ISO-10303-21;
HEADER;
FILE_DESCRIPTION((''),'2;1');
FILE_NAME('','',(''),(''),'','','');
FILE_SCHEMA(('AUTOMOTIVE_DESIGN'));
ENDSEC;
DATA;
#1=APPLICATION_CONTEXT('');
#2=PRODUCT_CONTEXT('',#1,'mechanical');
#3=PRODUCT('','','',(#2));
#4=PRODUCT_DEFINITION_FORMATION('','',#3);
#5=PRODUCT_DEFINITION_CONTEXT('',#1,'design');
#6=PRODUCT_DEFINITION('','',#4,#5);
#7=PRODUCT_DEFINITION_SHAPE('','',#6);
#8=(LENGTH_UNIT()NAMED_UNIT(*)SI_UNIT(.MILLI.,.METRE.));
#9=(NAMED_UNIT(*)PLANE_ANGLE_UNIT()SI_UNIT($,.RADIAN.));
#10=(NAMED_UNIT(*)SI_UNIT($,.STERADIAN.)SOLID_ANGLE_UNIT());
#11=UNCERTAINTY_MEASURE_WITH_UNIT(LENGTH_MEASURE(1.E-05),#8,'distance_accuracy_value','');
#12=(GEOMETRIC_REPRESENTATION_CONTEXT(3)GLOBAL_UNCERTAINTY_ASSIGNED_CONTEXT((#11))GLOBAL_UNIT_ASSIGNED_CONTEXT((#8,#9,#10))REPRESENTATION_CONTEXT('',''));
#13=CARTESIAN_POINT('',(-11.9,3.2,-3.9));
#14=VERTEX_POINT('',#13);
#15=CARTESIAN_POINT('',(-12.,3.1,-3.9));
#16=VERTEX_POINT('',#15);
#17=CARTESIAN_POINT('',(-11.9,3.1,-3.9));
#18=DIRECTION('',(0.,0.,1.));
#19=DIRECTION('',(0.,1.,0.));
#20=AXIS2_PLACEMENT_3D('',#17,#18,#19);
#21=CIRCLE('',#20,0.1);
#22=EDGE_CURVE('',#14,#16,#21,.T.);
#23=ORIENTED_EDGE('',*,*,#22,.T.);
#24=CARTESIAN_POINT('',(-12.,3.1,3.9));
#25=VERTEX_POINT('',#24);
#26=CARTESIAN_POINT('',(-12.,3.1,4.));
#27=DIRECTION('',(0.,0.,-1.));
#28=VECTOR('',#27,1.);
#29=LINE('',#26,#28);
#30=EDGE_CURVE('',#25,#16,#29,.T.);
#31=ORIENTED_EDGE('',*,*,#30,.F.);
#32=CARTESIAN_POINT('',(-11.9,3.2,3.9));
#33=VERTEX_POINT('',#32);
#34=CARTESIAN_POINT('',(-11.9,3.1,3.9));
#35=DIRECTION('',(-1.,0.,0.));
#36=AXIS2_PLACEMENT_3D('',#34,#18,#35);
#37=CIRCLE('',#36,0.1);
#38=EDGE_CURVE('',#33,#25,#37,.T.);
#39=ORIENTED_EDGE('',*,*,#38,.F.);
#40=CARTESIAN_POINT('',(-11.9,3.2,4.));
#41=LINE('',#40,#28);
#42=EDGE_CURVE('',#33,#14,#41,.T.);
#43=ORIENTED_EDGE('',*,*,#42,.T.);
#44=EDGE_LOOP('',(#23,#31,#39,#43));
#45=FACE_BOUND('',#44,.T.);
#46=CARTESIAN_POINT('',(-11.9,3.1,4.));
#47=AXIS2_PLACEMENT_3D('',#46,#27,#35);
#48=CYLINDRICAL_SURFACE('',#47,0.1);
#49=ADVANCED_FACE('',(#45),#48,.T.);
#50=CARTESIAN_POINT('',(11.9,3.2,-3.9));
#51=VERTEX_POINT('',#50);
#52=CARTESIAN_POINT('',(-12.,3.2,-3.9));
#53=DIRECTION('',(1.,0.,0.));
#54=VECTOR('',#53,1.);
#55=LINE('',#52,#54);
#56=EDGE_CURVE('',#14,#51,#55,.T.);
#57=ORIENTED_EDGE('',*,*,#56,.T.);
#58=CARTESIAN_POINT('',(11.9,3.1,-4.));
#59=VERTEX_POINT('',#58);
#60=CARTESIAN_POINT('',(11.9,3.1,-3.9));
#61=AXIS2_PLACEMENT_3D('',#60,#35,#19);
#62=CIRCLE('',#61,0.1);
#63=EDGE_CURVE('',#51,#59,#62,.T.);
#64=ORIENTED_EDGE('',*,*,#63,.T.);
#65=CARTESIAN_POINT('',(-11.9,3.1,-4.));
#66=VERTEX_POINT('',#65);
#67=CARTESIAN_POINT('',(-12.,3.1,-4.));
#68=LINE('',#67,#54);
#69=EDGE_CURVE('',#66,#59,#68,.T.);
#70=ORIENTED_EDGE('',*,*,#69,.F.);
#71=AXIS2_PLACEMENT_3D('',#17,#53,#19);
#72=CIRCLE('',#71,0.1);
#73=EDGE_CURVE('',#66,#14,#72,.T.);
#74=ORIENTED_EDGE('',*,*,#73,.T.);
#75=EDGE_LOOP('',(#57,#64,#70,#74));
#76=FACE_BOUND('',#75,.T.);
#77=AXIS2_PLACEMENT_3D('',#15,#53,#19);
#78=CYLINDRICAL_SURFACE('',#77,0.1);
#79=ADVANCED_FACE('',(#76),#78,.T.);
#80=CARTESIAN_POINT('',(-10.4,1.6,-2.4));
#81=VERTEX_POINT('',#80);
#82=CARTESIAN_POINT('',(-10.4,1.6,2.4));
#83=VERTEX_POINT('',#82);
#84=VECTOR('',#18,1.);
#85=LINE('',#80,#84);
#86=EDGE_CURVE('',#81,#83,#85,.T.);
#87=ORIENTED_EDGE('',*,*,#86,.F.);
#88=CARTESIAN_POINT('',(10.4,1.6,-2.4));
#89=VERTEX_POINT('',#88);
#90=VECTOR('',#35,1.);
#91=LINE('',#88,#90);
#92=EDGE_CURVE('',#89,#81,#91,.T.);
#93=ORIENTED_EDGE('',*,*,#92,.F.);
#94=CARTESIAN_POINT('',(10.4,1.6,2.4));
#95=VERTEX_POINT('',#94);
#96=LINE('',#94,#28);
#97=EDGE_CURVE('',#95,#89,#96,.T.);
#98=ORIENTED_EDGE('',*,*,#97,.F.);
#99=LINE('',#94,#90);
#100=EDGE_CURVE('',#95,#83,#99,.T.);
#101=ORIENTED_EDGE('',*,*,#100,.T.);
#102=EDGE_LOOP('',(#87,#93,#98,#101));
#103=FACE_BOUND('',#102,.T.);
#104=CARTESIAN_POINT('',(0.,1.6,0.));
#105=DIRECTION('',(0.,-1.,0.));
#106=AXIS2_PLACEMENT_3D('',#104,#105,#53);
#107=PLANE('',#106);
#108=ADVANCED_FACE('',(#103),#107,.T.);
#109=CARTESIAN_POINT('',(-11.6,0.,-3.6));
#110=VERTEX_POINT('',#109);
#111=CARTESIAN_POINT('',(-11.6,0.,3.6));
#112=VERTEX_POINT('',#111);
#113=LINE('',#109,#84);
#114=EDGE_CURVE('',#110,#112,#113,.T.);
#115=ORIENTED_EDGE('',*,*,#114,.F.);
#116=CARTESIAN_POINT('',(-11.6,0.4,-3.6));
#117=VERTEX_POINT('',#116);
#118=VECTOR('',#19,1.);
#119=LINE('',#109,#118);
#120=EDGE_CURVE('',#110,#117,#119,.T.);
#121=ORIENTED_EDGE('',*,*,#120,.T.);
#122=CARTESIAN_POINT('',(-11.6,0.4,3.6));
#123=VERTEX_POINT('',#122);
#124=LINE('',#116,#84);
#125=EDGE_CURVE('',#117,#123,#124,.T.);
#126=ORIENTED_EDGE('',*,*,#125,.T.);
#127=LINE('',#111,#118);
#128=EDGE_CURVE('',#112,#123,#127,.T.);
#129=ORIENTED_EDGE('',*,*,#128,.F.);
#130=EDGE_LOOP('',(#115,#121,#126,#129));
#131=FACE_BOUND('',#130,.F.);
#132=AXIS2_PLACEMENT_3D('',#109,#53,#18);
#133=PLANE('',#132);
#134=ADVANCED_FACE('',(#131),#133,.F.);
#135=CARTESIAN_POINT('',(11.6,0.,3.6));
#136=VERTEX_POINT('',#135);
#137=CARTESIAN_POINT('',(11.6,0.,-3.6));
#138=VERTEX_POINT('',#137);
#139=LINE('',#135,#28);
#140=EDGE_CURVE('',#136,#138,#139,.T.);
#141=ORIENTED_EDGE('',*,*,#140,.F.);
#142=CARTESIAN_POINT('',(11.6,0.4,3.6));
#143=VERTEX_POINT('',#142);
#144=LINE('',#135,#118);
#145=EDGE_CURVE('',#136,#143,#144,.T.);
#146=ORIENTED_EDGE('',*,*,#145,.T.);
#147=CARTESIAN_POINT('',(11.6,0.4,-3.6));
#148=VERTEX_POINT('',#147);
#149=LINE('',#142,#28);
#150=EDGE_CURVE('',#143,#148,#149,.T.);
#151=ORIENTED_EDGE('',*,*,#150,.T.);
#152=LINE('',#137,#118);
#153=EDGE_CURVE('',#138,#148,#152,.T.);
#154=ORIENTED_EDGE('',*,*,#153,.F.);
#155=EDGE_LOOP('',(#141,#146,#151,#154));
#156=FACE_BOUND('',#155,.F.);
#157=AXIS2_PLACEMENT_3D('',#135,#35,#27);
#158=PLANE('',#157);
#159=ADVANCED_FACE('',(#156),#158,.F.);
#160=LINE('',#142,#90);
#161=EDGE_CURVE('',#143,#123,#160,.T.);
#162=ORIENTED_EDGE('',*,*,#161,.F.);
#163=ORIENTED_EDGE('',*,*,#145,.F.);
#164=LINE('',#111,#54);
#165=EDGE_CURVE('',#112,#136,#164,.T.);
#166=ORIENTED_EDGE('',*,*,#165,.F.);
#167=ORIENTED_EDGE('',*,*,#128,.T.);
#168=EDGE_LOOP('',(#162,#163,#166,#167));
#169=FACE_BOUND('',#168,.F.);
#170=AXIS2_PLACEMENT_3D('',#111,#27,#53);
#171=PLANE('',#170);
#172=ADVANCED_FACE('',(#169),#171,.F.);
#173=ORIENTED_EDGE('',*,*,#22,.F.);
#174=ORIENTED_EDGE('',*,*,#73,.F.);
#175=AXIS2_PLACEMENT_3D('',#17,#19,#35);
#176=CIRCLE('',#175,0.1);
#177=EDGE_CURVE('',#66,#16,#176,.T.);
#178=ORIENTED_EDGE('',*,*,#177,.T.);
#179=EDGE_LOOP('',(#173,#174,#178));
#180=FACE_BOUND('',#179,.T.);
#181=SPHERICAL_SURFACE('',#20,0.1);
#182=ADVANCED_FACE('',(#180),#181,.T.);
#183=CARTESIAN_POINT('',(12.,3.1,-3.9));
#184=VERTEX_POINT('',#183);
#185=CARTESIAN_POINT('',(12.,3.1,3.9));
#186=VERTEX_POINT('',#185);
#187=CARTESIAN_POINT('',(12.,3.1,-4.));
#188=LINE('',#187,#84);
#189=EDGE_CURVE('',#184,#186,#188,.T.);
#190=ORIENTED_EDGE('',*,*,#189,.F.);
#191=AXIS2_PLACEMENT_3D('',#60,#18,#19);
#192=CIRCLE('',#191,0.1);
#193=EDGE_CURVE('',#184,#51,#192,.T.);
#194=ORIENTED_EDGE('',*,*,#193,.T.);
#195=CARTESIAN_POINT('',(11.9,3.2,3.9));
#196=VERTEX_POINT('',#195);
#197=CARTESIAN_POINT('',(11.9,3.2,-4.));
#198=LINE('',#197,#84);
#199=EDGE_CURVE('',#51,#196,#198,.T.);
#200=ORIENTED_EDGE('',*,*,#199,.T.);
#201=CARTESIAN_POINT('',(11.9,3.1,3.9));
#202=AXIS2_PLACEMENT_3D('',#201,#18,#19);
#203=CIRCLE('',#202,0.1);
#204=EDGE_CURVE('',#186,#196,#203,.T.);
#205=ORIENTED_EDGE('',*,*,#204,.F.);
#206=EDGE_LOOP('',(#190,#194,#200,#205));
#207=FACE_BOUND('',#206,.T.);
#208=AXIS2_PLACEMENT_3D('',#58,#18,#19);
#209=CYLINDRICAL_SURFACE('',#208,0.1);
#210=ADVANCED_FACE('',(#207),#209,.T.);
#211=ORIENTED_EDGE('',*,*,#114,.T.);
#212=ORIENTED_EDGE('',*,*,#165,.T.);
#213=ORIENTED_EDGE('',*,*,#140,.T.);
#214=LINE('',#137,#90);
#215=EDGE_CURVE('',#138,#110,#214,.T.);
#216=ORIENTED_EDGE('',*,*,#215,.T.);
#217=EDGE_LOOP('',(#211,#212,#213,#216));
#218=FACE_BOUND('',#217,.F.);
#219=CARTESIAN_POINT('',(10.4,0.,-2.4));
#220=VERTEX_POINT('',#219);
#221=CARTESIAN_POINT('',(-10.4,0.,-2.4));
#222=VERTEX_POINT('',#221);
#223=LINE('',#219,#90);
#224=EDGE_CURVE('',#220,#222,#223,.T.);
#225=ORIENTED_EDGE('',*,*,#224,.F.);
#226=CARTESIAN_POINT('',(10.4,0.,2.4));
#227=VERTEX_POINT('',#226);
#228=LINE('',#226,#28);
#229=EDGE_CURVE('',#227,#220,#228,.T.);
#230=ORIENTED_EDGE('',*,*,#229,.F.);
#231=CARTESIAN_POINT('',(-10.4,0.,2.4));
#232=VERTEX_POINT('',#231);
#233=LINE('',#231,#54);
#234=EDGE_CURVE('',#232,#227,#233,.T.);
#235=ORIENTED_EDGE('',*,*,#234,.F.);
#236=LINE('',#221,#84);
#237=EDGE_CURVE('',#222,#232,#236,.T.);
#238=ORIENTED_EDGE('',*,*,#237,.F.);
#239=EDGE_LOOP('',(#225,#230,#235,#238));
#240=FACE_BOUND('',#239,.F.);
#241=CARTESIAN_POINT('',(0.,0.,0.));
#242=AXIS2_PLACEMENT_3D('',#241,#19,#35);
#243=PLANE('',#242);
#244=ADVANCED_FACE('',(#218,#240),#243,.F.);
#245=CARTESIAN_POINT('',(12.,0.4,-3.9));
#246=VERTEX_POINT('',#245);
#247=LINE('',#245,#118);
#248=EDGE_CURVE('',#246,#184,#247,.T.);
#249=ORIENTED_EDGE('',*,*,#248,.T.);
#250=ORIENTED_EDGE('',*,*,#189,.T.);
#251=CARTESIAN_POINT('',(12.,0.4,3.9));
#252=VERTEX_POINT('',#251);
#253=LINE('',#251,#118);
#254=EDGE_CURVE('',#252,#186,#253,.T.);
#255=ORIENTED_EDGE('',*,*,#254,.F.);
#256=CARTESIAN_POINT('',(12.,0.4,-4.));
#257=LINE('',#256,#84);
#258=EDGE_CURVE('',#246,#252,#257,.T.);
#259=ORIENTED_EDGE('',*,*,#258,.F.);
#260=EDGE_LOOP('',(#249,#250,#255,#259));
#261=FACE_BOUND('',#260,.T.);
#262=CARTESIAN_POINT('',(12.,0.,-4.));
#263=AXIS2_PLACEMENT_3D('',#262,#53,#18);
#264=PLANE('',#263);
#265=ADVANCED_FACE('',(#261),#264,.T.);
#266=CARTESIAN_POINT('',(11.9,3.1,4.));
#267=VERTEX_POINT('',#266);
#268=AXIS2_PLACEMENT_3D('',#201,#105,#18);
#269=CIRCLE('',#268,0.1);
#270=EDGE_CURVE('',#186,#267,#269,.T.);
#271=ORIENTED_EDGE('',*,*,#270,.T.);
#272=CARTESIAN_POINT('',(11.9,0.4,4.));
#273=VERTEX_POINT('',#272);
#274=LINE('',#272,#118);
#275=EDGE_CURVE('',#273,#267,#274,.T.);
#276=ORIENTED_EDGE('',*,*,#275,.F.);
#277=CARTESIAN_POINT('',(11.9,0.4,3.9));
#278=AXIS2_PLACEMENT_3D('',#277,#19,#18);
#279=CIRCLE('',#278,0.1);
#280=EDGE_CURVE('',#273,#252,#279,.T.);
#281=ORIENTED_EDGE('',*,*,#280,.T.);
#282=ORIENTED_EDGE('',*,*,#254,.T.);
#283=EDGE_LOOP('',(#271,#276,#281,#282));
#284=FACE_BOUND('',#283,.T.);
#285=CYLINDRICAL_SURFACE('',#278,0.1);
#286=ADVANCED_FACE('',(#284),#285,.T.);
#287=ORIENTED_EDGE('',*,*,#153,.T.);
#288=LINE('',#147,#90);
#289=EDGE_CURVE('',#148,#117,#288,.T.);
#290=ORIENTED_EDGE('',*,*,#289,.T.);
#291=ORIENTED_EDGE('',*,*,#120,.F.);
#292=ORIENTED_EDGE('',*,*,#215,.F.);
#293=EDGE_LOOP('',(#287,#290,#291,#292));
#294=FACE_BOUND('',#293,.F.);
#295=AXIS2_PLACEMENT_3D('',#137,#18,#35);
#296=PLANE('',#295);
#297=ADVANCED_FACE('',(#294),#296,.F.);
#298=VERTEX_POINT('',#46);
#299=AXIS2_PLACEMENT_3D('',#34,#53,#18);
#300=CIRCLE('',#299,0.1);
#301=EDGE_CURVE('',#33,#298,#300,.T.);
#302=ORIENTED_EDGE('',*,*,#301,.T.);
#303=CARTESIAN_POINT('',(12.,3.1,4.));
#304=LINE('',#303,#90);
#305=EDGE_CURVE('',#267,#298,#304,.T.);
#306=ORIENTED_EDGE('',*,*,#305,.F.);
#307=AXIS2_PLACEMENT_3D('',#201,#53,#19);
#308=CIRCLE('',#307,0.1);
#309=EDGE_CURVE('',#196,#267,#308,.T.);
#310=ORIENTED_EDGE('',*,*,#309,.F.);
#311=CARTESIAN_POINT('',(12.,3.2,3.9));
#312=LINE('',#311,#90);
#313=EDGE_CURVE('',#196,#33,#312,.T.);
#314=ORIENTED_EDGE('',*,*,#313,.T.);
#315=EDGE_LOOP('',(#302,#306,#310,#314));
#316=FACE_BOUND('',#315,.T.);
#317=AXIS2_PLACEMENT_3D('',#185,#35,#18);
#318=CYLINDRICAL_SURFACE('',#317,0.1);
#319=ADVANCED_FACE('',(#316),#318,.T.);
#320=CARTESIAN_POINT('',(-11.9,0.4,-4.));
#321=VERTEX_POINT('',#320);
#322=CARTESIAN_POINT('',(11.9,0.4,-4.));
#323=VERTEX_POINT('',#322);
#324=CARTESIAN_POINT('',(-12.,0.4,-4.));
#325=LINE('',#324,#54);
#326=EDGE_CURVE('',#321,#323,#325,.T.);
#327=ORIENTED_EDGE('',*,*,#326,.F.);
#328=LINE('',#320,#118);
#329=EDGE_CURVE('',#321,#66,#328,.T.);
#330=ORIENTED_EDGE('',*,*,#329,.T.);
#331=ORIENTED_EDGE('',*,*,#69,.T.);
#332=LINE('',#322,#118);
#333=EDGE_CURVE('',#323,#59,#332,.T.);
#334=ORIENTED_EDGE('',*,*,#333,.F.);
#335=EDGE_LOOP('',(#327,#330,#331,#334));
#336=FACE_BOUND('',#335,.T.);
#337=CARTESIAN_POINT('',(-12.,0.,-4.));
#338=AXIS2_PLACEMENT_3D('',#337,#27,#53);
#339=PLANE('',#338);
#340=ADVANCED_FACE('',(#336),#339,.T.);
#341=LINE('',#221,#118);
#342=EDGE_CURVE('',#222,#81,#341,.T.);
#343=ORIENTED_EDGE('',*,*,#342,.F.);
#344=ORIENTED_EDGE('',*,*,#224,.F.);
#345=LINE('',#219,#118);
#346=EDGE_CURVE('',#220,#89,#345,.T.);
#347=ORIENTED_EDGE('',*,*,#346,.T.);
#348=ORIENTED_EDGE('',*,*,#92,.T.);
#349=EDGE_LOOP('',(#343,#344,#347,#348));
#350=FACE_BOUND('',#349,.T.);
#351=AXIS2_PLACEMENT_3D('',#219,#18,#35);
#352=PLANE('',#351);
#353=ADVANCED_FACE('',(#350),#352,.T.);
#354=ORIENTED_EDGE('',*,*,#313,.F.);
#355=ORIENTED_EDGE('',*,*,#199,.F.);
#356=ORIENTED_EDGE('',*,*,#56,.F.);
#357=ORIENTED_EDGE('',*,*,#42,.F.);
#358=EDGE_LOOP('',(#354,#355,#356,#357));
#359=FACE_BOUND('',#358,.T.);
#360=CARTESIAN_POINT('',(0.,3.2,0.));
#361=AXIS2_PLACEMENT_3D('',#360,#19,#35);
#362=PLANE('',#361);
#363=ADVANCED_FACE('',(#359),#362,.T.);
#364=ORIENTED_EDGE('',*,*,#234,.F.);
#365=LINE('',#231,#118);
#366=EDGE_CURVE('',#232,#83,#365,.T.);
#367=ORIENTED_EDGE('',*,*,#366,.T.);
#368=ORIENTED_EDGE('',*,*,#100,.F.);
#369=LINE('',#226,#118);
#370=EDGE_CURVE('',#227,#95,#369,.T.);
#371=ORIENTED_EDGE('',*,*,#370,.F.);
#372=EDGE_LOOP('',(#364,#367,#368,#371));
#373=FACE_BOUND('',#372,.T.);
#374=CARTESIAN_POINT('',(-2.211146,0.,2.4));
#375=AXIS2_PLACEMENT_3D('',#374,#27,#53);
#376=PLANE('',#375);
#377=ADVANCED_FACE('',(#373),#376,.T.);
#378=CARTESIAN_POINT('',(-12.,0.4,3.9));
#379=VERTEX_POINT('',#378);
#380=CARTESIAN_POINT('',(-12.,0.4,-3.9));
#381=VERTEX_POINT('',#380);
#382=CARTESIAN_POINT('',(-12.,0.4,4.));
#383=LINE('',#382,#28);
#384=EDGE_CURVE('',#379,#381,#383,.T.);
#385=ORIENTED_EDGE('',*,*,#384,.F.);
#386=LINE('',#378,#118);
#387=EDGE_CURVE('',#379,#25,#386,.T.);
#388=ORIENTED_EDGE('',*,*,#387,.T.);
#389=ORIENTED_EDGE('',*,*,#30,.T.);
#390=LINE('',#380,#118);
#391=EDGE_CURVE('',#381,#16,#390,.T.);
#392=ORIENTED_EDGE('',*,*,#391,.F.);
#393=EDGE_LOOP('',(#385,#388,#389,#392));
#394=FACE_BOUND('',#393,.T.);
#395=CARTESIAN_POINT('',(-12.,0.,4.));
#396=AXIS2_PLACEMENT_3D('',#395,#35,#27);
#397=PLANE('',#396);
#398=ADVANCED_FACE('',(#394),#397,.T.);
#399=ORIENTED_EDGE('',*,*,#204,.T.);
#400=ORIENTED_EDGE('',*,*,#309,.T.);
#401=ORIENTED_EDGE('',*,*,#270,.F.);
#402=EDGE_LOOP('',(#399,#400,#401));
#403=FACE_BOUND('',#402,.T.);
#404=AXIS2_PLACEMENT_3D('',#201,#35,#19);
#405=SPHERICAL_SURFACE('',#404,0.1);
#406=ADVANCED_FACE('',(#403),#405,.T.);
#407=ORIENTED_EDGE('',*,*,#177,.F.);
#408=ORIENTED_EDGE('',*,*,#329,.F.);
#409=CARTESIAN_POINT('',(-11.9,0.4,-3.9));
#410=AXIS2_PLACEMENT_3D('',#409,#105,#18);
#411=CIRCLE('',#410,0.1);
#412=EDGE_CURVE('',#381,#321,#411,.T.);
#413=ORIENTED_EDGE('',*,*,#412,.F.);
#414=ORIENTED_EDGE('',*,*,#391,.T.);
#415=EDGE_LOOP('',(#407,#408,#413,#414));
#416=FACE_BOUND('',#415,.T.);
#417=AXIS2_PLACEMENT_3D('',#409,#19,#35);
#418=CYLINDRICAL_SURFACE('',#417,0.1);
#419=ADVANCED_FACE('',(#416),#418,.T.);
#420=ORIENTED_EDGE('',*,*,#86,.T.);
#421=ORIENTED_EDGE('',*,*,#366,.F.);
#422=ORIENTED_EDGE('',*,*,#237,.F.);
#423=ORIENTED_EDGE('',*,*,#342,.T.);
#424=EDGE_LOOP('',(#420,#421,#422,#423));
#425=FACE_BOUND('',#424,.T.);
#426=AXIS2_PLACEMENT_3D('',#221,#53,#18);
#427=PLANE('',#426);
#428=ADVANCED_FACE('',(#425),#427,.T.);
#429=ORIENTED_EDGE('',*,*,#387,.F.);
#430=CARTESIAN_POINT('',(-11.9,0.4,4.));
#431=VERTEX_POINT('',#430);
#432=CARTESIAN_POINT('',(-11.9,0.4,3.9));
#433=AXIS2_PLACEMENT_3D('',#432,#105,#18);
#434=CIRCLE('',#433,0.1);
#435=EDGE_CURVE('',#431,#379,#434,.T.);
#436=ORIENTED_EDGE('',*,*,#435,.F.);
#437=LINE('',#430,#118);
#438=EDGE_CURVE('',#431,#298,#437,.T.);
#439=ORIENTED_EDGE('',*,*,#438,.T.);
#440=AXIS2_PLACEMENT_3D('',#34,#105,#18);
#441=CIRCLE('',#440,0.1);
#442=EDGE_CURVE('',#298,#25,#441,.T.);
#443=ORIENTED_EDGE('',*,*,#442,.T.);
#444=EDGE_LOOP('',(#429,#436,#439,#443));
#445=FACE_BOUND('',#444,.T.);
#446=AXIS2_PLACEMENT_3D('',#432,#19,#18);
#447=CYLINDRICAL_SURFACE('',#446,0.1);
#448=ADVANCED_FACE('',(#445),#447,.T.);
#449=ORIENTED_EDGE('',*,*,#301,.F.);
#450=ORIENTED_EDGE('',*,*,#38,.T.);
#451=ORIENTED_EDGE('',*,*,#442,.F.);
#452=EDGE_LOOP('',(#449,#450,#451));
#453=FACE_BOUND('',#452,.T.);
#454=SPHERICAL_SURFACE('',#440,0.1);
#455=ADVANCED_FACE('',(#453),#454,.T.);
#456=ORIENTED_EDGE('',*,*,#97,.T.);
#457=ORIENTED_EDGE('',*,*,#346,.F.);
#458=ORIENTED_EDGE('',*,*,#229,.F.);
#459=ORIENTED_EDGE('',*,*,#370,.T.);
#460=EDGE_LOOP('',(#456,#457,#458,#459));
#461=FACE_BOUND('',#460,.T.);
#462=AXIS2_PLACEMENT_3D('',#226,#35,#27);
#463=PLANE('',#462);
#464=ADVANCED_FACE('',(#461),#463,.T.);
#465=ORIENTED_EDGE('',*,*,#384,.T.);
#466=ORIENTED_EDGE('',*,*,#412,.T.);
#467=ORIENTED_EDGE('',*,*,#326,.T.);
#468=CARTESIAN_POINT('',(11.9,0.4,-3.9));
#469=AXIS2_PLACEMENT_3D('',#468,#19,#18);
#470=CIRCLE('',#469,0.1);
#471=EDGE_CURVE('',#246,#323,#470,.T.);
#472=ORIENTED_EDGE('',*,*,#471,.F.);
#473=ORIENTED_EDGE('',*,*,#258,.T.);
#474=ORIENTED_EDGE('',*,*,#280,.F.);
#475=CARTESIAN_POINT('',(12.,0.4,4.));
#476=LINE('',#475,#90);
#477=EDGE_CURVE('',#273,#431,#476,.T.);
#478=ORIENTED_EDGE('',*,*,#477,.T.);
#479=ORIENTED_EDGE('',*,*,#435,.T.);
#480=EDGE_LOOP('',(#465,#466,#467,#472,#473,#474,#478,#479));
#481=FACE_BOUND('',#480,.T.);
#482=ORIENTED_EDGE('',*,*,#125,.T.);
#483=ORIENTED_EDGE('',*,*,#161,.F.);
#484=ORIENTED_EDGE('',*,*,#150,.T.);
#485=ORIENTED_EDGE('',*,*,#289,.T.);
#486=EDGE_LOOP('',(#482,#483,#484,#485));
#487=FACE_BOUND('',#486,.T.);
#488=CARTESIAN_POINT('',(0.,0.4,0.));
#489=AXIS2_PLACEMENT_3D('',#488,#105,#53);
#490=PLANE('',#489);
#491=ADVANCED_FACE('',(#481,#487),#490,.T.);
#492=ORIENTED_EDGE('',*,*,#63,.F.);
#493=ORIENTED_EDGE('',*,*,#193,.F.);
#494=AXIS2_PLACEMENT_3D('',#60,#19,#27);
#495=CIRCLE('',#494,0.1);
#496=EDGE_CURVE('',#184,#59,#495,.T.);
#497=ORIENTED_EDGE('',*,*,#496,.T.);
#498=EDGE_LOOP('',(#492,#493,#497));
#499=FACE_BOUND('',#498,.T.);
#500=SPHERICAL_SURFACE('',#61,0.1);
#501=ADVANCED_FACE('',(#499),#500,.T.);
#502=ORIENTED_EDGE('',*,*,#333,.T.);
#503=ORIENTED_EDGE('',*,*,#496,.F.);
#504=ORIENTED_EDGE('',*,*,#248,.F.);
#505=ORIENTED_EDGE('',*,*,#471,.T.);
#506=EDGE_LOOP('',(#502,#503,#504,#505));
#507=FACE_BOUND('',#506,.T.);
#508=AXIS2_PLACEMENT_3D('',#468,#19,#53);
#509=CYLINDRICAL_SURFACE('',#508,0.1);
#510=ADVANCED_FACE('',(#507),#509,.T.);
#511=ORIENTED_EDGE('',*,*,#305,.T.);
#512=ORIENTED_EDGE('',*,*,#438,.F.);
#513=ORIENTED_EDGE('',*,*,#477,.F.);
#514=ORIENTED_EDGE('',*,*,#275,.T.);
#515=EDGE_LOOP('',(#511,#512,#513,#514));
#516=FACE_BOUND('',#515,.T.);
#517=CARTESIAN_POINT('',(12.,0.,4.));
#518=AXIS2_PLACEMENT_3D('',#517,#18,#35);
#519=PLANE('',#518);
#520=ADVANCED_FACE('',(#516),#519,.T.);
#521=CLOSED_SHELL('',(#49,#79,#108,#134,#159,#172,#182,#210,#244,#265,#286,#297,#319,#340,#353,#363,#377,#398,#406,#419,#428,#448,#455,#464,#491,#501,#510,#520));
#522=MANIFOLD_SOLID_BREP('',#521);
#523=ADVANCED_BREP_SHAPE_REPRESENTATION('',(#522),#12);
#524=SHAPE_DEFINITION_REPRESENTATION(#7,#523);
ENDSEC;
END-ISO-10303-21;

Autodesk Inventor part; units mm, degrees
ref_plane "YZ Plane" through (0, 0, 0) normal (1, 0, 0) x (0, 1, 0)
ref_plane "XZ Plane" through (0, 0, 0) normal (0, 1, 0) x (-1, 0, 0)
ref_plane "XY Plane" through (0, 0, 0) normal (0, 0, 1) x (1, 0, 0)
sketch "Sketch2" plane through (0, 0, 0) normal (0, 1, 0) x (-1, 0, 0)
  line L0 (-12, 4) -> (12, 4)
  line L1 (12, 4) -> (12, -4)
  line L2 (12, -4) -> (-12, -4)
  line L3 (-12, -4) -> (-12, 4)
  point P0 (0, 0)
  point P1 (0, 4)
  point P2 (-12, 0)
  dimension "d0" = 24
  dimension "d1" = 8
extrude "Extrusion1" add sketch "Sketch2" along normal blind 3.2
sketch "Sketch3" plane through (0, 0, 0) normal (0, -1, 0) x (1, 0, 0)
  line L0 (12, 4) -> (-12, 4) projected
  line L1 (-12, 4) -> (-12, -4) projected
  line L2 (-10.4, 2.4) -> (10.4, 2.4)
  line L3 (10.4, 2.4) -> (10.4, -2.4)
  line L4 (10.4, -2.4) -> (-10.4, -2.4)
  line L5 (-10.4, -2.4) -> (-10.4, 2.4)
  circle A0 centre (-4, 4) radius 3.2569
  circle A1 centre (-4, 4) radius 2.4
  line L6 (-12, -4) -> (12, -4) projected
  circle A2 centre (-4, 0) radius 1.6
  line L7 (12, -4) -> (12, 4) projected
  line L8 (-8, 0) -> (0, 0) construction
  line L9 (0, 0) -> (8, 0) construction
  line L10 (-11.6, 3.6) -> (11.6, 3.6)
  line L11 (11.6, 3.6) -> (11.6, -3.6)
  line L12 (11.6, -3.6) -> (-11.6, -3.6)
  line L13 (-11.6, -3.6) -> (-11.6, 3.6)
  point P0 (-10.4, 0)
  point P1 (0, 2.4)
  point P2 (-4, 0)
  point P3 (0, 3.6)
  point P4 (-11.6, 0)
  dimension "d8" = 1.6
  dimension "d60" = 6.5137
  dimension "d61" = 4.8
  dimension "d62" = 1.6
  dimension "d75" = 8
  dimension "d76" = 8
  dimension "d86" = 3.2
  dimension "d89" = 8
  dimension "d95" = 0.4
  dimension "d96" = 0.4
extrude "Extrusion2" cut sketch "Sketch3" against normal blind 1.6 contours A0 A2 A1 L2 | L2 L3 L4 L5 A0 A2 | A1 L2 | L2 A1 A2 A0 | A2 A0 | A0 A2
extrude "Extrusion7" cut sketch "Sketch3" against normal blind 0.4 contours L7 L6 L1 L0 A0 L10 L13 L12 L11 | A0 L10 A1 L0 | A1 L10 L0 | L0 A1 L10 A0
fillet "Fillet1" radius 0.1 8 edges at (-12, 1.8, 4) (0, 3.2, 4) (-12, 3.2, 0) (0, 3.2, -4) (12, 3.2, 0) (12, 1.8, 4) (12, 1.8, -4) (-12, 1.8, -4)
equation "\"d4\" = 0.333333 * lh"
equation "\"d8\" = d62"
equation "\"d60\" = tubeod"
equation "\"d61\" = kd"
equation "\"d62\" = wall"
equation "\"d75\" = lu"
equation "\"d76\" = d75"
equation "\"d86\" = pd"
equation "\"d89\" = lu"
equation "\"d95\" = gw"
equation "\"d96\" = gw"
equation "\"d11\" = 0.333333 * lh - topthk"
equation "\"d97\" = gh"
equation "\"lh\" = 9.6"
equation "\"tubeod\" = 6.513708"
equation "\"kd\" = 4.8"
equation "\"wall\" = 1.6"
equation "\"lu\" = 8"
equation "\"pd\" = 3.2"
equation "\"gw\" = 0.4"
equation "\"topthk\" = 1.6"
equation "\"gh\" = 0.4"
properties part number "63864-DkBluishGray" material "ABS Plastic"
